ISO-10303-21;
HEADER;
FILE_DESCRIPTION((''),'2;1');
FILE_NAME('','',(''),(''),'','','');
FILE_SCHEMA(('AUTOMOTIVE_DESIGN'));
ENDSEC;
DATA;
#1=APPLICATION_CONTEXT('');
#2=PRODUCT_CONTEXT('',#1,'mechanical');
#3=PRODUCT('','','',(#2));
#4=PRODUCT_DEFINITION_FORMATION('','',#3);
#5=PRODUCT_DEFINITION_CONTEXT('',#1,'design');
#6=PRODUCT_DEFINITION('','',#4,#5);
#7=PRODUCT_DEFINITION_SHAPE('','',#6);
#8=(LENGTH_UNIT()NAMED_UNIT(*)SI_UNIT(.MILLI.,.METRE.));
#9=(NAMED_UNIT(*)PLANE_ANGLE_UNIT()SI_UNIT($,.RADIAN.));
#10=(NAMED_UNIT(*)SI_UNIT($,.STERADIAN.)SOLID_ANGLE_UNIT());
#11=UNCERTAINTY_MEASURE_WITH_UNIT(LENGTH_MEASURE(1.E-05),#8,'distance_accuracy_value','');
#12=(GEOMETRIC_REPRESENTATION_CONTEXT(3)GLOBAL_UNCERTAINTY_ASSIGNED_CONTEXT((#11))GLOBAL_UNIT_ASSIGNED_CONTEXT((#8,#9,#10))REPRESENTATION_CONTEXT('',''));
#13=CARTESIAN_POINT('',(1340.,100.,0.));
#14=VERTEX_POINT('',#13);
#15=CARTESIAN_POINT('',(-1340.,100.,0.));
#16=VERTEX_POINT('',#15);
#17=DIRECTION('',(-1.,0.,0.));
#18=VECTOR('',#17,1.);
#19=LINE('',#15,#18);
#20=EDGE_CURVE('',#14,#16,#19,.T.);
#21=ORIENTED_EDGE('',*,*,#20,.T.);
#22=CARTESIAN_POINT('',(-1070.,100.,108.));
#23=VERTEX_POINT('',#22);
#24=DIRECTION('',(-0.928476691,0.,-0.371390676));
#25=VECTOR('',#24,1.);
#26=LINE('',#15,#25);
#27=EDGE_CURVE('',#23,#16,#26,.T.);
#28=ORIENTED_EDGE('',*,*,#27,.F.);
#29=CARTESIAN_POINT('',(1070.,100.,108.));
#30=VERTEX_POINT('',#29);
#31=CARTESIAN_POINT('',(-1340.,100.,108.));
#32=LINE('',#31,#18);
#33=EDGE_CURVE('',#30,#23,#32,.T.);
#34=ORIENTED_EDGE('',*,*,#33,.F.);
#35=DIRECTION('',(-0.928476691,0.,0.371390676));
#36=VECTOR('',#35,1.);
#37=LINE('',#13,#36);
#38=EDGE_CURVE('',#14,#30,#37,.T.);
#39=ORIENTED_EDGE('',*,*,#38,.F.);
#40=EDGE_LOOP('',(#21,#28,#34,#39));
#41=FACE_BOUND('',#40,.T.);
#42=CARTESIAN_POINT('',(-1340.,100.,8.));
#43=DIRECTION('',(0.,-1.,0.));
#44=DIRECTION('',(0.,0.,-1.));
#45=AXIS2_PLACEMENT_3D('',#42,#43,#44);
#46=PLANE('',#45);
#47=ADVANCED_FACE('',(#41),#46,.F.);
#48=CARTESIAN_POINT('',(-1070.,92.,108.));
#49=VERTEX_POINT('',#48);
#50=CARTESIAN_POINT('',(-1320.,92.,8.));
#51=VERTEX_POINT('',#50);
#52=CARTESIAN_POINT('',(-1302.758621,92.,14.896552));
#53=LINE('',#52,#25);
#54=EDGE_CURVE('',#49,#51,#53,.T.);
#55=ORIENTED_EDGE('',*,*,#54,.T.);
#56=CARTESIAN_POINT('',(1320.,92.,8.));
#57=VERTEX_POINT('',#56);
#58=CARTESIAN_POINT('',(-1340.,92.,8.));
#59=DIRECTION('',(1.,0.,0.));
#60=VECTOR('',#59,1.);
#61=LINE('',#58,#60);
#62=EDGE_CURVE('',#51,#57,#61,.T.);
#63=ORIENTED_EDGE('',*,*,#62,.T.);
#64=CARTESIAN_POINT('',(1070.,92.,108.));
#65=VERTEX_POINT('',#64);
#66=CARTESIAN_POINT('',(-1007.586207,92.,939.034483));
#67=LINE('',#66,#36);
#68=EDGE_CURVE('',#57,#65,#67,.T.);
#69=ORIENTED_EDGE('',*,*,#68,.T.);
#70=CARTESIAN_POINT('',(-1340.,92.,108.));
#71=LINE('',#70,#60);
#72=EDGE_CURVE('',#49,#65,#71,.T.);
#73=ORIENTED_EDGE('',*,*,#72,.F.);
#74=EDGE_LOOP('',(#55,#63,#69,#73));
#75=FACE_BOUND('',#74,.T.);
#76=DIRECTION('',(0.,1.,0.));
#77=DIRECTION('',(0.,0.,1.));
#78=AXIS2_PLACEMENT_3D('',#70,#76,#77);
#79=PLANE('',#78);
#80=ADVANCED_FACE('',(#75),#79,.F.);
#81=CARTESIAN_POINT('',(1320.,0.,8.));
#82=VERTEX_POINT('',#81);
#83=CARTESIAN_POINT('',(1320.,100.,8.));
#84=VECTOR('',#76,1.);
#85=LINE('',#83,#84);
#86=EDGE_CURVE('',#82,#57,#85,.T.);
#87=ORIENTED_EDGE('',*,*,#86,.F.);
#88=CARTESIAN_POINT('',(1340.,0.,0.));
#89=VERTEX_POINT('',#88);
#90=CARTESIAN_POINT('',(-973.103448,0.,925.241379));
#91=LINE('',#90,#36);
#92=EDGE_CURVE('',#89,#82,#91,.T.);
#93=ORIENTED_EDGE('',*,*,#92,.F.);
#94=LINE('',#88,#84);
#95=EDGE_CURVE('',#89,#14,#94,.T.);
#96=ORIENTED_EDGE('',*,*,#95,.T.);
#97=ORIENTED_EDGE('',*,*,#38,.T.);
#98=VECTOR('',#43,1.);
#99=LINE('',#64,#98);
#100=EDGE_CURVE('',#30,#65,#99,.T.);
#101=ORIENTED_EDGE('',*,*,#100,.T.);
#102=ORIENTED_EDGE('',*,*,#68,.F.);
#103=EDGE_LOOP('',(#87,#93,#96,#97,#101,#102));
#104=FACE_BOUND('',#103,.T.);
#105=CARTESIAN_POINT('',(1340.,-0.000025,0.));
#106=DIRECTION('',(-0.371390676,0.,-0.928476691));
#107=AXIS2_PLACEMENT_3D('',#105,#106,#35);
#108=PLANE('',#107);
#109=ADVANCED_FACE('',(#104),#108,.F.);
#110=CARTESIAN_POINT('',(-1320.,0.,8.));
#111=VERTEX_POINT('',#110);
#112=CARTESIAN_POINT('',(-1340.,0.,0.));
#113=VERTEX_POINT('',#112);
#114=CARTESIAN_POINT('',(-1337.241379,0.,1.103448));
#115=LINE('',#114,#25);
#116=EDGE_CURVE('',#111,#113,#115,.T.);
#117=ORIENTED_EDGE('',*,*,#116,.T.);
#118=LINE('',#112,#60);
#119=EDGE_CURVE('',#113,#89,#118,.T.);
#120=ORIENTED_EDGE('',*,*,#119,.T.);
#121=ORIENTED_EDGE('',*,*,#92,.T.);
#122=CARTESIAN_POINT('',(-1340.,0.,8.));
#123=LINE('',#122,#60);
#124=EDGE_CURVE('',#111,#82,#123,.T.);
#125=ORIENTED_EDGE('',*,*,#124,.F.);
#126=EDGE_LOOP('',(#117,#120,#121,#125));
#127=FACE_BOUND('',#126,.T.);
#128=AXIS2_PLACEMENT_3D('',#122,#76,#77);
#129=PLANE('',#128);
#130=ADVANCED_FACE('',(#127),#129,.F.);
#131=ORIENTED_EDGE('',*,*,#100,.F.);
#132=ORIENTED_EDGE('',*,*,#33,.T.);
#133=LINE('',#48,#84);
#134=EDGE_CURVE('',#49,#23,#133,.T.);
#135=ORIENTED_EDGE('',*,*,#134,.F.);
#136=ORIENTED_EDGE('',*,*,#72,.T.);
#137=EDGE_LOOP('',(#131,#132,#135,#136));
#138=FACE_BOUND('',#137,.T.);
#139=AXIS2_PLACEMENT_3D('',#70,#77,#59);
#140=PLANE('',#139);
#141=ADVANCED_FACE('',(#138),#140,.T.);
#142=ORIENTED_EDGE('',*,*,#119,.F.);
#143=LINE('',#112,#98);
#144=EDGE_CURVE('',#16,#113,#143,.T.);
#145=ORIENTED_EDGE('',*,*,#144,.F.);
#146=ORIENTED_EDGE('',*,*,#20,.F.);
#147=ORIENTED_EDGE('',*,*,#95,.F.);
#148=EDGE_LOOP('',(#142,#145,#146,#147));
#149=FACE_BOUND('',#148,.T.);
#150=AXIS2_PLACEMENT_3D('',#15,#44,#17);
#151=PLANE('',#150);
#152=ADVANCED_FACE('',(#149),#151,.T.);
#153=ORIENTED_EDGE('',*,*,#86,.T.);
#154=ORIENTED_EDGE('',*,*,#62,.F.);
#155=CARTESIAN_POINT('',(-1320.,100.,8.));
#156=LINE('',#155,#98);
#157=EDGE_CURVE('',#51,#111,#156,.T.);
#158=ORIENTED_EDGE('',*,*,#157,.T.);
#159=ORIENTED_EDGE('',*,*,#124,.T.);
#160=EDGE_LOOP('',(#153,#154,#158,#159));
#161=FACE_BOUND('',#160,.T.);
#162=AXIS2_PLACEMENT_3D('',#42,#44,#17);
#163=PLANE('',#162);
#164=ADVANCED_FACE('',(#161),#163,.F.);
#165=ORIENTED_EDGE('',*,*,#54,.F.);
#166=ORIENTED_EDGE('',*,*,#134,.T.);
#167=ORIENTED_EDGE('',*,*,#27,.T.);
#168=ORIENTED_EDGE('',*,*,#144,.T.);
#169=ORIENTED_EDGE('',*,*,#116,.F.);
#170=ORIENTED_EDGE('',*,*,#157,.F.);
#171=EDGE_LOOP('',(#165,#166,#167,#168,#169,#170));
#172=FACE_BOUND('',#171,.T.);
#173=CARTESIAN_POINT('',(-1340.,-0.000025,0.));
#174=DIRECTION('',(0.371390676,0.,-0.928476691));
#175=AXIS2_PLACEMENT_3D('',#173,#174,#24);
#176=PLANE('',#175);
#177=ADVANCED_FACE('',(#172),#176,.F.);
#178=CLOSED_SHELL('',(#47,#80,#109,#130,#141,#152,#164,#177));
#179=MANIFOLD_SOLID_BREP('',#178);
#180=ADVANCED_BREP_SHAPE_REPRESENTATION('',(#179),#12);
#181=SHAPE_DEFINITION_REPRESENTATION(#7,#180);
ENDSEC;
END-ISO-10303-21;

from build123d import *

# Parameters (mm, degrees)
SKETCH_1_W          = 2680
SKETCH_1_H          = 100
EXTRUDE_465_DEPTH   = 8
SKETCH_2_W          = 2680
SKETCH_2_H          = 8
EXTRUDE_1_DEPTH     = 100
CUT_EXTRUDE_1_DEPTH = 100


# Read off the part's stored shape, not the designer's step: 切除-拉伸1
with BuildPart() as part:
    # 草图1 → Extrude 465 (new body)
    with BuildSketch(Plane.XY):
        with Locations((0, 50)):
            Rectangle(SKETCH_1_W, SKETCH_1_H)
    extrude(amount=EXTRUDE_465_DEPTH)

    # 草图2 → 凸台-拉伸1 (add)
    with BuildSketch(Plane.XY.offset(8)):
        with Locations((0, 96)):
            Rectangle(SKETCH_2_W, SKETCH_2_H)
    extrude(amount=EXTRUDE_1_DEPTH)

    # 切除-拉伸1 outline → 切除-拉伸1 (cut)
    with BuildSketch(Plane(origin=(0, 0, 0), x_dir=(1, 0, 0), z_dir=(0, 1, 0))):
        Polygon((1340, -108), (1340, 0), (1070, -108), align=None)
        Polygon((-1340, -108), (-1070, -108), (-1340, 0), align=None)
    extrude(amount=CUT_EXTRUDE_1_DEPTH, mode=Mode.SUBTRACT)


solid = part.part
